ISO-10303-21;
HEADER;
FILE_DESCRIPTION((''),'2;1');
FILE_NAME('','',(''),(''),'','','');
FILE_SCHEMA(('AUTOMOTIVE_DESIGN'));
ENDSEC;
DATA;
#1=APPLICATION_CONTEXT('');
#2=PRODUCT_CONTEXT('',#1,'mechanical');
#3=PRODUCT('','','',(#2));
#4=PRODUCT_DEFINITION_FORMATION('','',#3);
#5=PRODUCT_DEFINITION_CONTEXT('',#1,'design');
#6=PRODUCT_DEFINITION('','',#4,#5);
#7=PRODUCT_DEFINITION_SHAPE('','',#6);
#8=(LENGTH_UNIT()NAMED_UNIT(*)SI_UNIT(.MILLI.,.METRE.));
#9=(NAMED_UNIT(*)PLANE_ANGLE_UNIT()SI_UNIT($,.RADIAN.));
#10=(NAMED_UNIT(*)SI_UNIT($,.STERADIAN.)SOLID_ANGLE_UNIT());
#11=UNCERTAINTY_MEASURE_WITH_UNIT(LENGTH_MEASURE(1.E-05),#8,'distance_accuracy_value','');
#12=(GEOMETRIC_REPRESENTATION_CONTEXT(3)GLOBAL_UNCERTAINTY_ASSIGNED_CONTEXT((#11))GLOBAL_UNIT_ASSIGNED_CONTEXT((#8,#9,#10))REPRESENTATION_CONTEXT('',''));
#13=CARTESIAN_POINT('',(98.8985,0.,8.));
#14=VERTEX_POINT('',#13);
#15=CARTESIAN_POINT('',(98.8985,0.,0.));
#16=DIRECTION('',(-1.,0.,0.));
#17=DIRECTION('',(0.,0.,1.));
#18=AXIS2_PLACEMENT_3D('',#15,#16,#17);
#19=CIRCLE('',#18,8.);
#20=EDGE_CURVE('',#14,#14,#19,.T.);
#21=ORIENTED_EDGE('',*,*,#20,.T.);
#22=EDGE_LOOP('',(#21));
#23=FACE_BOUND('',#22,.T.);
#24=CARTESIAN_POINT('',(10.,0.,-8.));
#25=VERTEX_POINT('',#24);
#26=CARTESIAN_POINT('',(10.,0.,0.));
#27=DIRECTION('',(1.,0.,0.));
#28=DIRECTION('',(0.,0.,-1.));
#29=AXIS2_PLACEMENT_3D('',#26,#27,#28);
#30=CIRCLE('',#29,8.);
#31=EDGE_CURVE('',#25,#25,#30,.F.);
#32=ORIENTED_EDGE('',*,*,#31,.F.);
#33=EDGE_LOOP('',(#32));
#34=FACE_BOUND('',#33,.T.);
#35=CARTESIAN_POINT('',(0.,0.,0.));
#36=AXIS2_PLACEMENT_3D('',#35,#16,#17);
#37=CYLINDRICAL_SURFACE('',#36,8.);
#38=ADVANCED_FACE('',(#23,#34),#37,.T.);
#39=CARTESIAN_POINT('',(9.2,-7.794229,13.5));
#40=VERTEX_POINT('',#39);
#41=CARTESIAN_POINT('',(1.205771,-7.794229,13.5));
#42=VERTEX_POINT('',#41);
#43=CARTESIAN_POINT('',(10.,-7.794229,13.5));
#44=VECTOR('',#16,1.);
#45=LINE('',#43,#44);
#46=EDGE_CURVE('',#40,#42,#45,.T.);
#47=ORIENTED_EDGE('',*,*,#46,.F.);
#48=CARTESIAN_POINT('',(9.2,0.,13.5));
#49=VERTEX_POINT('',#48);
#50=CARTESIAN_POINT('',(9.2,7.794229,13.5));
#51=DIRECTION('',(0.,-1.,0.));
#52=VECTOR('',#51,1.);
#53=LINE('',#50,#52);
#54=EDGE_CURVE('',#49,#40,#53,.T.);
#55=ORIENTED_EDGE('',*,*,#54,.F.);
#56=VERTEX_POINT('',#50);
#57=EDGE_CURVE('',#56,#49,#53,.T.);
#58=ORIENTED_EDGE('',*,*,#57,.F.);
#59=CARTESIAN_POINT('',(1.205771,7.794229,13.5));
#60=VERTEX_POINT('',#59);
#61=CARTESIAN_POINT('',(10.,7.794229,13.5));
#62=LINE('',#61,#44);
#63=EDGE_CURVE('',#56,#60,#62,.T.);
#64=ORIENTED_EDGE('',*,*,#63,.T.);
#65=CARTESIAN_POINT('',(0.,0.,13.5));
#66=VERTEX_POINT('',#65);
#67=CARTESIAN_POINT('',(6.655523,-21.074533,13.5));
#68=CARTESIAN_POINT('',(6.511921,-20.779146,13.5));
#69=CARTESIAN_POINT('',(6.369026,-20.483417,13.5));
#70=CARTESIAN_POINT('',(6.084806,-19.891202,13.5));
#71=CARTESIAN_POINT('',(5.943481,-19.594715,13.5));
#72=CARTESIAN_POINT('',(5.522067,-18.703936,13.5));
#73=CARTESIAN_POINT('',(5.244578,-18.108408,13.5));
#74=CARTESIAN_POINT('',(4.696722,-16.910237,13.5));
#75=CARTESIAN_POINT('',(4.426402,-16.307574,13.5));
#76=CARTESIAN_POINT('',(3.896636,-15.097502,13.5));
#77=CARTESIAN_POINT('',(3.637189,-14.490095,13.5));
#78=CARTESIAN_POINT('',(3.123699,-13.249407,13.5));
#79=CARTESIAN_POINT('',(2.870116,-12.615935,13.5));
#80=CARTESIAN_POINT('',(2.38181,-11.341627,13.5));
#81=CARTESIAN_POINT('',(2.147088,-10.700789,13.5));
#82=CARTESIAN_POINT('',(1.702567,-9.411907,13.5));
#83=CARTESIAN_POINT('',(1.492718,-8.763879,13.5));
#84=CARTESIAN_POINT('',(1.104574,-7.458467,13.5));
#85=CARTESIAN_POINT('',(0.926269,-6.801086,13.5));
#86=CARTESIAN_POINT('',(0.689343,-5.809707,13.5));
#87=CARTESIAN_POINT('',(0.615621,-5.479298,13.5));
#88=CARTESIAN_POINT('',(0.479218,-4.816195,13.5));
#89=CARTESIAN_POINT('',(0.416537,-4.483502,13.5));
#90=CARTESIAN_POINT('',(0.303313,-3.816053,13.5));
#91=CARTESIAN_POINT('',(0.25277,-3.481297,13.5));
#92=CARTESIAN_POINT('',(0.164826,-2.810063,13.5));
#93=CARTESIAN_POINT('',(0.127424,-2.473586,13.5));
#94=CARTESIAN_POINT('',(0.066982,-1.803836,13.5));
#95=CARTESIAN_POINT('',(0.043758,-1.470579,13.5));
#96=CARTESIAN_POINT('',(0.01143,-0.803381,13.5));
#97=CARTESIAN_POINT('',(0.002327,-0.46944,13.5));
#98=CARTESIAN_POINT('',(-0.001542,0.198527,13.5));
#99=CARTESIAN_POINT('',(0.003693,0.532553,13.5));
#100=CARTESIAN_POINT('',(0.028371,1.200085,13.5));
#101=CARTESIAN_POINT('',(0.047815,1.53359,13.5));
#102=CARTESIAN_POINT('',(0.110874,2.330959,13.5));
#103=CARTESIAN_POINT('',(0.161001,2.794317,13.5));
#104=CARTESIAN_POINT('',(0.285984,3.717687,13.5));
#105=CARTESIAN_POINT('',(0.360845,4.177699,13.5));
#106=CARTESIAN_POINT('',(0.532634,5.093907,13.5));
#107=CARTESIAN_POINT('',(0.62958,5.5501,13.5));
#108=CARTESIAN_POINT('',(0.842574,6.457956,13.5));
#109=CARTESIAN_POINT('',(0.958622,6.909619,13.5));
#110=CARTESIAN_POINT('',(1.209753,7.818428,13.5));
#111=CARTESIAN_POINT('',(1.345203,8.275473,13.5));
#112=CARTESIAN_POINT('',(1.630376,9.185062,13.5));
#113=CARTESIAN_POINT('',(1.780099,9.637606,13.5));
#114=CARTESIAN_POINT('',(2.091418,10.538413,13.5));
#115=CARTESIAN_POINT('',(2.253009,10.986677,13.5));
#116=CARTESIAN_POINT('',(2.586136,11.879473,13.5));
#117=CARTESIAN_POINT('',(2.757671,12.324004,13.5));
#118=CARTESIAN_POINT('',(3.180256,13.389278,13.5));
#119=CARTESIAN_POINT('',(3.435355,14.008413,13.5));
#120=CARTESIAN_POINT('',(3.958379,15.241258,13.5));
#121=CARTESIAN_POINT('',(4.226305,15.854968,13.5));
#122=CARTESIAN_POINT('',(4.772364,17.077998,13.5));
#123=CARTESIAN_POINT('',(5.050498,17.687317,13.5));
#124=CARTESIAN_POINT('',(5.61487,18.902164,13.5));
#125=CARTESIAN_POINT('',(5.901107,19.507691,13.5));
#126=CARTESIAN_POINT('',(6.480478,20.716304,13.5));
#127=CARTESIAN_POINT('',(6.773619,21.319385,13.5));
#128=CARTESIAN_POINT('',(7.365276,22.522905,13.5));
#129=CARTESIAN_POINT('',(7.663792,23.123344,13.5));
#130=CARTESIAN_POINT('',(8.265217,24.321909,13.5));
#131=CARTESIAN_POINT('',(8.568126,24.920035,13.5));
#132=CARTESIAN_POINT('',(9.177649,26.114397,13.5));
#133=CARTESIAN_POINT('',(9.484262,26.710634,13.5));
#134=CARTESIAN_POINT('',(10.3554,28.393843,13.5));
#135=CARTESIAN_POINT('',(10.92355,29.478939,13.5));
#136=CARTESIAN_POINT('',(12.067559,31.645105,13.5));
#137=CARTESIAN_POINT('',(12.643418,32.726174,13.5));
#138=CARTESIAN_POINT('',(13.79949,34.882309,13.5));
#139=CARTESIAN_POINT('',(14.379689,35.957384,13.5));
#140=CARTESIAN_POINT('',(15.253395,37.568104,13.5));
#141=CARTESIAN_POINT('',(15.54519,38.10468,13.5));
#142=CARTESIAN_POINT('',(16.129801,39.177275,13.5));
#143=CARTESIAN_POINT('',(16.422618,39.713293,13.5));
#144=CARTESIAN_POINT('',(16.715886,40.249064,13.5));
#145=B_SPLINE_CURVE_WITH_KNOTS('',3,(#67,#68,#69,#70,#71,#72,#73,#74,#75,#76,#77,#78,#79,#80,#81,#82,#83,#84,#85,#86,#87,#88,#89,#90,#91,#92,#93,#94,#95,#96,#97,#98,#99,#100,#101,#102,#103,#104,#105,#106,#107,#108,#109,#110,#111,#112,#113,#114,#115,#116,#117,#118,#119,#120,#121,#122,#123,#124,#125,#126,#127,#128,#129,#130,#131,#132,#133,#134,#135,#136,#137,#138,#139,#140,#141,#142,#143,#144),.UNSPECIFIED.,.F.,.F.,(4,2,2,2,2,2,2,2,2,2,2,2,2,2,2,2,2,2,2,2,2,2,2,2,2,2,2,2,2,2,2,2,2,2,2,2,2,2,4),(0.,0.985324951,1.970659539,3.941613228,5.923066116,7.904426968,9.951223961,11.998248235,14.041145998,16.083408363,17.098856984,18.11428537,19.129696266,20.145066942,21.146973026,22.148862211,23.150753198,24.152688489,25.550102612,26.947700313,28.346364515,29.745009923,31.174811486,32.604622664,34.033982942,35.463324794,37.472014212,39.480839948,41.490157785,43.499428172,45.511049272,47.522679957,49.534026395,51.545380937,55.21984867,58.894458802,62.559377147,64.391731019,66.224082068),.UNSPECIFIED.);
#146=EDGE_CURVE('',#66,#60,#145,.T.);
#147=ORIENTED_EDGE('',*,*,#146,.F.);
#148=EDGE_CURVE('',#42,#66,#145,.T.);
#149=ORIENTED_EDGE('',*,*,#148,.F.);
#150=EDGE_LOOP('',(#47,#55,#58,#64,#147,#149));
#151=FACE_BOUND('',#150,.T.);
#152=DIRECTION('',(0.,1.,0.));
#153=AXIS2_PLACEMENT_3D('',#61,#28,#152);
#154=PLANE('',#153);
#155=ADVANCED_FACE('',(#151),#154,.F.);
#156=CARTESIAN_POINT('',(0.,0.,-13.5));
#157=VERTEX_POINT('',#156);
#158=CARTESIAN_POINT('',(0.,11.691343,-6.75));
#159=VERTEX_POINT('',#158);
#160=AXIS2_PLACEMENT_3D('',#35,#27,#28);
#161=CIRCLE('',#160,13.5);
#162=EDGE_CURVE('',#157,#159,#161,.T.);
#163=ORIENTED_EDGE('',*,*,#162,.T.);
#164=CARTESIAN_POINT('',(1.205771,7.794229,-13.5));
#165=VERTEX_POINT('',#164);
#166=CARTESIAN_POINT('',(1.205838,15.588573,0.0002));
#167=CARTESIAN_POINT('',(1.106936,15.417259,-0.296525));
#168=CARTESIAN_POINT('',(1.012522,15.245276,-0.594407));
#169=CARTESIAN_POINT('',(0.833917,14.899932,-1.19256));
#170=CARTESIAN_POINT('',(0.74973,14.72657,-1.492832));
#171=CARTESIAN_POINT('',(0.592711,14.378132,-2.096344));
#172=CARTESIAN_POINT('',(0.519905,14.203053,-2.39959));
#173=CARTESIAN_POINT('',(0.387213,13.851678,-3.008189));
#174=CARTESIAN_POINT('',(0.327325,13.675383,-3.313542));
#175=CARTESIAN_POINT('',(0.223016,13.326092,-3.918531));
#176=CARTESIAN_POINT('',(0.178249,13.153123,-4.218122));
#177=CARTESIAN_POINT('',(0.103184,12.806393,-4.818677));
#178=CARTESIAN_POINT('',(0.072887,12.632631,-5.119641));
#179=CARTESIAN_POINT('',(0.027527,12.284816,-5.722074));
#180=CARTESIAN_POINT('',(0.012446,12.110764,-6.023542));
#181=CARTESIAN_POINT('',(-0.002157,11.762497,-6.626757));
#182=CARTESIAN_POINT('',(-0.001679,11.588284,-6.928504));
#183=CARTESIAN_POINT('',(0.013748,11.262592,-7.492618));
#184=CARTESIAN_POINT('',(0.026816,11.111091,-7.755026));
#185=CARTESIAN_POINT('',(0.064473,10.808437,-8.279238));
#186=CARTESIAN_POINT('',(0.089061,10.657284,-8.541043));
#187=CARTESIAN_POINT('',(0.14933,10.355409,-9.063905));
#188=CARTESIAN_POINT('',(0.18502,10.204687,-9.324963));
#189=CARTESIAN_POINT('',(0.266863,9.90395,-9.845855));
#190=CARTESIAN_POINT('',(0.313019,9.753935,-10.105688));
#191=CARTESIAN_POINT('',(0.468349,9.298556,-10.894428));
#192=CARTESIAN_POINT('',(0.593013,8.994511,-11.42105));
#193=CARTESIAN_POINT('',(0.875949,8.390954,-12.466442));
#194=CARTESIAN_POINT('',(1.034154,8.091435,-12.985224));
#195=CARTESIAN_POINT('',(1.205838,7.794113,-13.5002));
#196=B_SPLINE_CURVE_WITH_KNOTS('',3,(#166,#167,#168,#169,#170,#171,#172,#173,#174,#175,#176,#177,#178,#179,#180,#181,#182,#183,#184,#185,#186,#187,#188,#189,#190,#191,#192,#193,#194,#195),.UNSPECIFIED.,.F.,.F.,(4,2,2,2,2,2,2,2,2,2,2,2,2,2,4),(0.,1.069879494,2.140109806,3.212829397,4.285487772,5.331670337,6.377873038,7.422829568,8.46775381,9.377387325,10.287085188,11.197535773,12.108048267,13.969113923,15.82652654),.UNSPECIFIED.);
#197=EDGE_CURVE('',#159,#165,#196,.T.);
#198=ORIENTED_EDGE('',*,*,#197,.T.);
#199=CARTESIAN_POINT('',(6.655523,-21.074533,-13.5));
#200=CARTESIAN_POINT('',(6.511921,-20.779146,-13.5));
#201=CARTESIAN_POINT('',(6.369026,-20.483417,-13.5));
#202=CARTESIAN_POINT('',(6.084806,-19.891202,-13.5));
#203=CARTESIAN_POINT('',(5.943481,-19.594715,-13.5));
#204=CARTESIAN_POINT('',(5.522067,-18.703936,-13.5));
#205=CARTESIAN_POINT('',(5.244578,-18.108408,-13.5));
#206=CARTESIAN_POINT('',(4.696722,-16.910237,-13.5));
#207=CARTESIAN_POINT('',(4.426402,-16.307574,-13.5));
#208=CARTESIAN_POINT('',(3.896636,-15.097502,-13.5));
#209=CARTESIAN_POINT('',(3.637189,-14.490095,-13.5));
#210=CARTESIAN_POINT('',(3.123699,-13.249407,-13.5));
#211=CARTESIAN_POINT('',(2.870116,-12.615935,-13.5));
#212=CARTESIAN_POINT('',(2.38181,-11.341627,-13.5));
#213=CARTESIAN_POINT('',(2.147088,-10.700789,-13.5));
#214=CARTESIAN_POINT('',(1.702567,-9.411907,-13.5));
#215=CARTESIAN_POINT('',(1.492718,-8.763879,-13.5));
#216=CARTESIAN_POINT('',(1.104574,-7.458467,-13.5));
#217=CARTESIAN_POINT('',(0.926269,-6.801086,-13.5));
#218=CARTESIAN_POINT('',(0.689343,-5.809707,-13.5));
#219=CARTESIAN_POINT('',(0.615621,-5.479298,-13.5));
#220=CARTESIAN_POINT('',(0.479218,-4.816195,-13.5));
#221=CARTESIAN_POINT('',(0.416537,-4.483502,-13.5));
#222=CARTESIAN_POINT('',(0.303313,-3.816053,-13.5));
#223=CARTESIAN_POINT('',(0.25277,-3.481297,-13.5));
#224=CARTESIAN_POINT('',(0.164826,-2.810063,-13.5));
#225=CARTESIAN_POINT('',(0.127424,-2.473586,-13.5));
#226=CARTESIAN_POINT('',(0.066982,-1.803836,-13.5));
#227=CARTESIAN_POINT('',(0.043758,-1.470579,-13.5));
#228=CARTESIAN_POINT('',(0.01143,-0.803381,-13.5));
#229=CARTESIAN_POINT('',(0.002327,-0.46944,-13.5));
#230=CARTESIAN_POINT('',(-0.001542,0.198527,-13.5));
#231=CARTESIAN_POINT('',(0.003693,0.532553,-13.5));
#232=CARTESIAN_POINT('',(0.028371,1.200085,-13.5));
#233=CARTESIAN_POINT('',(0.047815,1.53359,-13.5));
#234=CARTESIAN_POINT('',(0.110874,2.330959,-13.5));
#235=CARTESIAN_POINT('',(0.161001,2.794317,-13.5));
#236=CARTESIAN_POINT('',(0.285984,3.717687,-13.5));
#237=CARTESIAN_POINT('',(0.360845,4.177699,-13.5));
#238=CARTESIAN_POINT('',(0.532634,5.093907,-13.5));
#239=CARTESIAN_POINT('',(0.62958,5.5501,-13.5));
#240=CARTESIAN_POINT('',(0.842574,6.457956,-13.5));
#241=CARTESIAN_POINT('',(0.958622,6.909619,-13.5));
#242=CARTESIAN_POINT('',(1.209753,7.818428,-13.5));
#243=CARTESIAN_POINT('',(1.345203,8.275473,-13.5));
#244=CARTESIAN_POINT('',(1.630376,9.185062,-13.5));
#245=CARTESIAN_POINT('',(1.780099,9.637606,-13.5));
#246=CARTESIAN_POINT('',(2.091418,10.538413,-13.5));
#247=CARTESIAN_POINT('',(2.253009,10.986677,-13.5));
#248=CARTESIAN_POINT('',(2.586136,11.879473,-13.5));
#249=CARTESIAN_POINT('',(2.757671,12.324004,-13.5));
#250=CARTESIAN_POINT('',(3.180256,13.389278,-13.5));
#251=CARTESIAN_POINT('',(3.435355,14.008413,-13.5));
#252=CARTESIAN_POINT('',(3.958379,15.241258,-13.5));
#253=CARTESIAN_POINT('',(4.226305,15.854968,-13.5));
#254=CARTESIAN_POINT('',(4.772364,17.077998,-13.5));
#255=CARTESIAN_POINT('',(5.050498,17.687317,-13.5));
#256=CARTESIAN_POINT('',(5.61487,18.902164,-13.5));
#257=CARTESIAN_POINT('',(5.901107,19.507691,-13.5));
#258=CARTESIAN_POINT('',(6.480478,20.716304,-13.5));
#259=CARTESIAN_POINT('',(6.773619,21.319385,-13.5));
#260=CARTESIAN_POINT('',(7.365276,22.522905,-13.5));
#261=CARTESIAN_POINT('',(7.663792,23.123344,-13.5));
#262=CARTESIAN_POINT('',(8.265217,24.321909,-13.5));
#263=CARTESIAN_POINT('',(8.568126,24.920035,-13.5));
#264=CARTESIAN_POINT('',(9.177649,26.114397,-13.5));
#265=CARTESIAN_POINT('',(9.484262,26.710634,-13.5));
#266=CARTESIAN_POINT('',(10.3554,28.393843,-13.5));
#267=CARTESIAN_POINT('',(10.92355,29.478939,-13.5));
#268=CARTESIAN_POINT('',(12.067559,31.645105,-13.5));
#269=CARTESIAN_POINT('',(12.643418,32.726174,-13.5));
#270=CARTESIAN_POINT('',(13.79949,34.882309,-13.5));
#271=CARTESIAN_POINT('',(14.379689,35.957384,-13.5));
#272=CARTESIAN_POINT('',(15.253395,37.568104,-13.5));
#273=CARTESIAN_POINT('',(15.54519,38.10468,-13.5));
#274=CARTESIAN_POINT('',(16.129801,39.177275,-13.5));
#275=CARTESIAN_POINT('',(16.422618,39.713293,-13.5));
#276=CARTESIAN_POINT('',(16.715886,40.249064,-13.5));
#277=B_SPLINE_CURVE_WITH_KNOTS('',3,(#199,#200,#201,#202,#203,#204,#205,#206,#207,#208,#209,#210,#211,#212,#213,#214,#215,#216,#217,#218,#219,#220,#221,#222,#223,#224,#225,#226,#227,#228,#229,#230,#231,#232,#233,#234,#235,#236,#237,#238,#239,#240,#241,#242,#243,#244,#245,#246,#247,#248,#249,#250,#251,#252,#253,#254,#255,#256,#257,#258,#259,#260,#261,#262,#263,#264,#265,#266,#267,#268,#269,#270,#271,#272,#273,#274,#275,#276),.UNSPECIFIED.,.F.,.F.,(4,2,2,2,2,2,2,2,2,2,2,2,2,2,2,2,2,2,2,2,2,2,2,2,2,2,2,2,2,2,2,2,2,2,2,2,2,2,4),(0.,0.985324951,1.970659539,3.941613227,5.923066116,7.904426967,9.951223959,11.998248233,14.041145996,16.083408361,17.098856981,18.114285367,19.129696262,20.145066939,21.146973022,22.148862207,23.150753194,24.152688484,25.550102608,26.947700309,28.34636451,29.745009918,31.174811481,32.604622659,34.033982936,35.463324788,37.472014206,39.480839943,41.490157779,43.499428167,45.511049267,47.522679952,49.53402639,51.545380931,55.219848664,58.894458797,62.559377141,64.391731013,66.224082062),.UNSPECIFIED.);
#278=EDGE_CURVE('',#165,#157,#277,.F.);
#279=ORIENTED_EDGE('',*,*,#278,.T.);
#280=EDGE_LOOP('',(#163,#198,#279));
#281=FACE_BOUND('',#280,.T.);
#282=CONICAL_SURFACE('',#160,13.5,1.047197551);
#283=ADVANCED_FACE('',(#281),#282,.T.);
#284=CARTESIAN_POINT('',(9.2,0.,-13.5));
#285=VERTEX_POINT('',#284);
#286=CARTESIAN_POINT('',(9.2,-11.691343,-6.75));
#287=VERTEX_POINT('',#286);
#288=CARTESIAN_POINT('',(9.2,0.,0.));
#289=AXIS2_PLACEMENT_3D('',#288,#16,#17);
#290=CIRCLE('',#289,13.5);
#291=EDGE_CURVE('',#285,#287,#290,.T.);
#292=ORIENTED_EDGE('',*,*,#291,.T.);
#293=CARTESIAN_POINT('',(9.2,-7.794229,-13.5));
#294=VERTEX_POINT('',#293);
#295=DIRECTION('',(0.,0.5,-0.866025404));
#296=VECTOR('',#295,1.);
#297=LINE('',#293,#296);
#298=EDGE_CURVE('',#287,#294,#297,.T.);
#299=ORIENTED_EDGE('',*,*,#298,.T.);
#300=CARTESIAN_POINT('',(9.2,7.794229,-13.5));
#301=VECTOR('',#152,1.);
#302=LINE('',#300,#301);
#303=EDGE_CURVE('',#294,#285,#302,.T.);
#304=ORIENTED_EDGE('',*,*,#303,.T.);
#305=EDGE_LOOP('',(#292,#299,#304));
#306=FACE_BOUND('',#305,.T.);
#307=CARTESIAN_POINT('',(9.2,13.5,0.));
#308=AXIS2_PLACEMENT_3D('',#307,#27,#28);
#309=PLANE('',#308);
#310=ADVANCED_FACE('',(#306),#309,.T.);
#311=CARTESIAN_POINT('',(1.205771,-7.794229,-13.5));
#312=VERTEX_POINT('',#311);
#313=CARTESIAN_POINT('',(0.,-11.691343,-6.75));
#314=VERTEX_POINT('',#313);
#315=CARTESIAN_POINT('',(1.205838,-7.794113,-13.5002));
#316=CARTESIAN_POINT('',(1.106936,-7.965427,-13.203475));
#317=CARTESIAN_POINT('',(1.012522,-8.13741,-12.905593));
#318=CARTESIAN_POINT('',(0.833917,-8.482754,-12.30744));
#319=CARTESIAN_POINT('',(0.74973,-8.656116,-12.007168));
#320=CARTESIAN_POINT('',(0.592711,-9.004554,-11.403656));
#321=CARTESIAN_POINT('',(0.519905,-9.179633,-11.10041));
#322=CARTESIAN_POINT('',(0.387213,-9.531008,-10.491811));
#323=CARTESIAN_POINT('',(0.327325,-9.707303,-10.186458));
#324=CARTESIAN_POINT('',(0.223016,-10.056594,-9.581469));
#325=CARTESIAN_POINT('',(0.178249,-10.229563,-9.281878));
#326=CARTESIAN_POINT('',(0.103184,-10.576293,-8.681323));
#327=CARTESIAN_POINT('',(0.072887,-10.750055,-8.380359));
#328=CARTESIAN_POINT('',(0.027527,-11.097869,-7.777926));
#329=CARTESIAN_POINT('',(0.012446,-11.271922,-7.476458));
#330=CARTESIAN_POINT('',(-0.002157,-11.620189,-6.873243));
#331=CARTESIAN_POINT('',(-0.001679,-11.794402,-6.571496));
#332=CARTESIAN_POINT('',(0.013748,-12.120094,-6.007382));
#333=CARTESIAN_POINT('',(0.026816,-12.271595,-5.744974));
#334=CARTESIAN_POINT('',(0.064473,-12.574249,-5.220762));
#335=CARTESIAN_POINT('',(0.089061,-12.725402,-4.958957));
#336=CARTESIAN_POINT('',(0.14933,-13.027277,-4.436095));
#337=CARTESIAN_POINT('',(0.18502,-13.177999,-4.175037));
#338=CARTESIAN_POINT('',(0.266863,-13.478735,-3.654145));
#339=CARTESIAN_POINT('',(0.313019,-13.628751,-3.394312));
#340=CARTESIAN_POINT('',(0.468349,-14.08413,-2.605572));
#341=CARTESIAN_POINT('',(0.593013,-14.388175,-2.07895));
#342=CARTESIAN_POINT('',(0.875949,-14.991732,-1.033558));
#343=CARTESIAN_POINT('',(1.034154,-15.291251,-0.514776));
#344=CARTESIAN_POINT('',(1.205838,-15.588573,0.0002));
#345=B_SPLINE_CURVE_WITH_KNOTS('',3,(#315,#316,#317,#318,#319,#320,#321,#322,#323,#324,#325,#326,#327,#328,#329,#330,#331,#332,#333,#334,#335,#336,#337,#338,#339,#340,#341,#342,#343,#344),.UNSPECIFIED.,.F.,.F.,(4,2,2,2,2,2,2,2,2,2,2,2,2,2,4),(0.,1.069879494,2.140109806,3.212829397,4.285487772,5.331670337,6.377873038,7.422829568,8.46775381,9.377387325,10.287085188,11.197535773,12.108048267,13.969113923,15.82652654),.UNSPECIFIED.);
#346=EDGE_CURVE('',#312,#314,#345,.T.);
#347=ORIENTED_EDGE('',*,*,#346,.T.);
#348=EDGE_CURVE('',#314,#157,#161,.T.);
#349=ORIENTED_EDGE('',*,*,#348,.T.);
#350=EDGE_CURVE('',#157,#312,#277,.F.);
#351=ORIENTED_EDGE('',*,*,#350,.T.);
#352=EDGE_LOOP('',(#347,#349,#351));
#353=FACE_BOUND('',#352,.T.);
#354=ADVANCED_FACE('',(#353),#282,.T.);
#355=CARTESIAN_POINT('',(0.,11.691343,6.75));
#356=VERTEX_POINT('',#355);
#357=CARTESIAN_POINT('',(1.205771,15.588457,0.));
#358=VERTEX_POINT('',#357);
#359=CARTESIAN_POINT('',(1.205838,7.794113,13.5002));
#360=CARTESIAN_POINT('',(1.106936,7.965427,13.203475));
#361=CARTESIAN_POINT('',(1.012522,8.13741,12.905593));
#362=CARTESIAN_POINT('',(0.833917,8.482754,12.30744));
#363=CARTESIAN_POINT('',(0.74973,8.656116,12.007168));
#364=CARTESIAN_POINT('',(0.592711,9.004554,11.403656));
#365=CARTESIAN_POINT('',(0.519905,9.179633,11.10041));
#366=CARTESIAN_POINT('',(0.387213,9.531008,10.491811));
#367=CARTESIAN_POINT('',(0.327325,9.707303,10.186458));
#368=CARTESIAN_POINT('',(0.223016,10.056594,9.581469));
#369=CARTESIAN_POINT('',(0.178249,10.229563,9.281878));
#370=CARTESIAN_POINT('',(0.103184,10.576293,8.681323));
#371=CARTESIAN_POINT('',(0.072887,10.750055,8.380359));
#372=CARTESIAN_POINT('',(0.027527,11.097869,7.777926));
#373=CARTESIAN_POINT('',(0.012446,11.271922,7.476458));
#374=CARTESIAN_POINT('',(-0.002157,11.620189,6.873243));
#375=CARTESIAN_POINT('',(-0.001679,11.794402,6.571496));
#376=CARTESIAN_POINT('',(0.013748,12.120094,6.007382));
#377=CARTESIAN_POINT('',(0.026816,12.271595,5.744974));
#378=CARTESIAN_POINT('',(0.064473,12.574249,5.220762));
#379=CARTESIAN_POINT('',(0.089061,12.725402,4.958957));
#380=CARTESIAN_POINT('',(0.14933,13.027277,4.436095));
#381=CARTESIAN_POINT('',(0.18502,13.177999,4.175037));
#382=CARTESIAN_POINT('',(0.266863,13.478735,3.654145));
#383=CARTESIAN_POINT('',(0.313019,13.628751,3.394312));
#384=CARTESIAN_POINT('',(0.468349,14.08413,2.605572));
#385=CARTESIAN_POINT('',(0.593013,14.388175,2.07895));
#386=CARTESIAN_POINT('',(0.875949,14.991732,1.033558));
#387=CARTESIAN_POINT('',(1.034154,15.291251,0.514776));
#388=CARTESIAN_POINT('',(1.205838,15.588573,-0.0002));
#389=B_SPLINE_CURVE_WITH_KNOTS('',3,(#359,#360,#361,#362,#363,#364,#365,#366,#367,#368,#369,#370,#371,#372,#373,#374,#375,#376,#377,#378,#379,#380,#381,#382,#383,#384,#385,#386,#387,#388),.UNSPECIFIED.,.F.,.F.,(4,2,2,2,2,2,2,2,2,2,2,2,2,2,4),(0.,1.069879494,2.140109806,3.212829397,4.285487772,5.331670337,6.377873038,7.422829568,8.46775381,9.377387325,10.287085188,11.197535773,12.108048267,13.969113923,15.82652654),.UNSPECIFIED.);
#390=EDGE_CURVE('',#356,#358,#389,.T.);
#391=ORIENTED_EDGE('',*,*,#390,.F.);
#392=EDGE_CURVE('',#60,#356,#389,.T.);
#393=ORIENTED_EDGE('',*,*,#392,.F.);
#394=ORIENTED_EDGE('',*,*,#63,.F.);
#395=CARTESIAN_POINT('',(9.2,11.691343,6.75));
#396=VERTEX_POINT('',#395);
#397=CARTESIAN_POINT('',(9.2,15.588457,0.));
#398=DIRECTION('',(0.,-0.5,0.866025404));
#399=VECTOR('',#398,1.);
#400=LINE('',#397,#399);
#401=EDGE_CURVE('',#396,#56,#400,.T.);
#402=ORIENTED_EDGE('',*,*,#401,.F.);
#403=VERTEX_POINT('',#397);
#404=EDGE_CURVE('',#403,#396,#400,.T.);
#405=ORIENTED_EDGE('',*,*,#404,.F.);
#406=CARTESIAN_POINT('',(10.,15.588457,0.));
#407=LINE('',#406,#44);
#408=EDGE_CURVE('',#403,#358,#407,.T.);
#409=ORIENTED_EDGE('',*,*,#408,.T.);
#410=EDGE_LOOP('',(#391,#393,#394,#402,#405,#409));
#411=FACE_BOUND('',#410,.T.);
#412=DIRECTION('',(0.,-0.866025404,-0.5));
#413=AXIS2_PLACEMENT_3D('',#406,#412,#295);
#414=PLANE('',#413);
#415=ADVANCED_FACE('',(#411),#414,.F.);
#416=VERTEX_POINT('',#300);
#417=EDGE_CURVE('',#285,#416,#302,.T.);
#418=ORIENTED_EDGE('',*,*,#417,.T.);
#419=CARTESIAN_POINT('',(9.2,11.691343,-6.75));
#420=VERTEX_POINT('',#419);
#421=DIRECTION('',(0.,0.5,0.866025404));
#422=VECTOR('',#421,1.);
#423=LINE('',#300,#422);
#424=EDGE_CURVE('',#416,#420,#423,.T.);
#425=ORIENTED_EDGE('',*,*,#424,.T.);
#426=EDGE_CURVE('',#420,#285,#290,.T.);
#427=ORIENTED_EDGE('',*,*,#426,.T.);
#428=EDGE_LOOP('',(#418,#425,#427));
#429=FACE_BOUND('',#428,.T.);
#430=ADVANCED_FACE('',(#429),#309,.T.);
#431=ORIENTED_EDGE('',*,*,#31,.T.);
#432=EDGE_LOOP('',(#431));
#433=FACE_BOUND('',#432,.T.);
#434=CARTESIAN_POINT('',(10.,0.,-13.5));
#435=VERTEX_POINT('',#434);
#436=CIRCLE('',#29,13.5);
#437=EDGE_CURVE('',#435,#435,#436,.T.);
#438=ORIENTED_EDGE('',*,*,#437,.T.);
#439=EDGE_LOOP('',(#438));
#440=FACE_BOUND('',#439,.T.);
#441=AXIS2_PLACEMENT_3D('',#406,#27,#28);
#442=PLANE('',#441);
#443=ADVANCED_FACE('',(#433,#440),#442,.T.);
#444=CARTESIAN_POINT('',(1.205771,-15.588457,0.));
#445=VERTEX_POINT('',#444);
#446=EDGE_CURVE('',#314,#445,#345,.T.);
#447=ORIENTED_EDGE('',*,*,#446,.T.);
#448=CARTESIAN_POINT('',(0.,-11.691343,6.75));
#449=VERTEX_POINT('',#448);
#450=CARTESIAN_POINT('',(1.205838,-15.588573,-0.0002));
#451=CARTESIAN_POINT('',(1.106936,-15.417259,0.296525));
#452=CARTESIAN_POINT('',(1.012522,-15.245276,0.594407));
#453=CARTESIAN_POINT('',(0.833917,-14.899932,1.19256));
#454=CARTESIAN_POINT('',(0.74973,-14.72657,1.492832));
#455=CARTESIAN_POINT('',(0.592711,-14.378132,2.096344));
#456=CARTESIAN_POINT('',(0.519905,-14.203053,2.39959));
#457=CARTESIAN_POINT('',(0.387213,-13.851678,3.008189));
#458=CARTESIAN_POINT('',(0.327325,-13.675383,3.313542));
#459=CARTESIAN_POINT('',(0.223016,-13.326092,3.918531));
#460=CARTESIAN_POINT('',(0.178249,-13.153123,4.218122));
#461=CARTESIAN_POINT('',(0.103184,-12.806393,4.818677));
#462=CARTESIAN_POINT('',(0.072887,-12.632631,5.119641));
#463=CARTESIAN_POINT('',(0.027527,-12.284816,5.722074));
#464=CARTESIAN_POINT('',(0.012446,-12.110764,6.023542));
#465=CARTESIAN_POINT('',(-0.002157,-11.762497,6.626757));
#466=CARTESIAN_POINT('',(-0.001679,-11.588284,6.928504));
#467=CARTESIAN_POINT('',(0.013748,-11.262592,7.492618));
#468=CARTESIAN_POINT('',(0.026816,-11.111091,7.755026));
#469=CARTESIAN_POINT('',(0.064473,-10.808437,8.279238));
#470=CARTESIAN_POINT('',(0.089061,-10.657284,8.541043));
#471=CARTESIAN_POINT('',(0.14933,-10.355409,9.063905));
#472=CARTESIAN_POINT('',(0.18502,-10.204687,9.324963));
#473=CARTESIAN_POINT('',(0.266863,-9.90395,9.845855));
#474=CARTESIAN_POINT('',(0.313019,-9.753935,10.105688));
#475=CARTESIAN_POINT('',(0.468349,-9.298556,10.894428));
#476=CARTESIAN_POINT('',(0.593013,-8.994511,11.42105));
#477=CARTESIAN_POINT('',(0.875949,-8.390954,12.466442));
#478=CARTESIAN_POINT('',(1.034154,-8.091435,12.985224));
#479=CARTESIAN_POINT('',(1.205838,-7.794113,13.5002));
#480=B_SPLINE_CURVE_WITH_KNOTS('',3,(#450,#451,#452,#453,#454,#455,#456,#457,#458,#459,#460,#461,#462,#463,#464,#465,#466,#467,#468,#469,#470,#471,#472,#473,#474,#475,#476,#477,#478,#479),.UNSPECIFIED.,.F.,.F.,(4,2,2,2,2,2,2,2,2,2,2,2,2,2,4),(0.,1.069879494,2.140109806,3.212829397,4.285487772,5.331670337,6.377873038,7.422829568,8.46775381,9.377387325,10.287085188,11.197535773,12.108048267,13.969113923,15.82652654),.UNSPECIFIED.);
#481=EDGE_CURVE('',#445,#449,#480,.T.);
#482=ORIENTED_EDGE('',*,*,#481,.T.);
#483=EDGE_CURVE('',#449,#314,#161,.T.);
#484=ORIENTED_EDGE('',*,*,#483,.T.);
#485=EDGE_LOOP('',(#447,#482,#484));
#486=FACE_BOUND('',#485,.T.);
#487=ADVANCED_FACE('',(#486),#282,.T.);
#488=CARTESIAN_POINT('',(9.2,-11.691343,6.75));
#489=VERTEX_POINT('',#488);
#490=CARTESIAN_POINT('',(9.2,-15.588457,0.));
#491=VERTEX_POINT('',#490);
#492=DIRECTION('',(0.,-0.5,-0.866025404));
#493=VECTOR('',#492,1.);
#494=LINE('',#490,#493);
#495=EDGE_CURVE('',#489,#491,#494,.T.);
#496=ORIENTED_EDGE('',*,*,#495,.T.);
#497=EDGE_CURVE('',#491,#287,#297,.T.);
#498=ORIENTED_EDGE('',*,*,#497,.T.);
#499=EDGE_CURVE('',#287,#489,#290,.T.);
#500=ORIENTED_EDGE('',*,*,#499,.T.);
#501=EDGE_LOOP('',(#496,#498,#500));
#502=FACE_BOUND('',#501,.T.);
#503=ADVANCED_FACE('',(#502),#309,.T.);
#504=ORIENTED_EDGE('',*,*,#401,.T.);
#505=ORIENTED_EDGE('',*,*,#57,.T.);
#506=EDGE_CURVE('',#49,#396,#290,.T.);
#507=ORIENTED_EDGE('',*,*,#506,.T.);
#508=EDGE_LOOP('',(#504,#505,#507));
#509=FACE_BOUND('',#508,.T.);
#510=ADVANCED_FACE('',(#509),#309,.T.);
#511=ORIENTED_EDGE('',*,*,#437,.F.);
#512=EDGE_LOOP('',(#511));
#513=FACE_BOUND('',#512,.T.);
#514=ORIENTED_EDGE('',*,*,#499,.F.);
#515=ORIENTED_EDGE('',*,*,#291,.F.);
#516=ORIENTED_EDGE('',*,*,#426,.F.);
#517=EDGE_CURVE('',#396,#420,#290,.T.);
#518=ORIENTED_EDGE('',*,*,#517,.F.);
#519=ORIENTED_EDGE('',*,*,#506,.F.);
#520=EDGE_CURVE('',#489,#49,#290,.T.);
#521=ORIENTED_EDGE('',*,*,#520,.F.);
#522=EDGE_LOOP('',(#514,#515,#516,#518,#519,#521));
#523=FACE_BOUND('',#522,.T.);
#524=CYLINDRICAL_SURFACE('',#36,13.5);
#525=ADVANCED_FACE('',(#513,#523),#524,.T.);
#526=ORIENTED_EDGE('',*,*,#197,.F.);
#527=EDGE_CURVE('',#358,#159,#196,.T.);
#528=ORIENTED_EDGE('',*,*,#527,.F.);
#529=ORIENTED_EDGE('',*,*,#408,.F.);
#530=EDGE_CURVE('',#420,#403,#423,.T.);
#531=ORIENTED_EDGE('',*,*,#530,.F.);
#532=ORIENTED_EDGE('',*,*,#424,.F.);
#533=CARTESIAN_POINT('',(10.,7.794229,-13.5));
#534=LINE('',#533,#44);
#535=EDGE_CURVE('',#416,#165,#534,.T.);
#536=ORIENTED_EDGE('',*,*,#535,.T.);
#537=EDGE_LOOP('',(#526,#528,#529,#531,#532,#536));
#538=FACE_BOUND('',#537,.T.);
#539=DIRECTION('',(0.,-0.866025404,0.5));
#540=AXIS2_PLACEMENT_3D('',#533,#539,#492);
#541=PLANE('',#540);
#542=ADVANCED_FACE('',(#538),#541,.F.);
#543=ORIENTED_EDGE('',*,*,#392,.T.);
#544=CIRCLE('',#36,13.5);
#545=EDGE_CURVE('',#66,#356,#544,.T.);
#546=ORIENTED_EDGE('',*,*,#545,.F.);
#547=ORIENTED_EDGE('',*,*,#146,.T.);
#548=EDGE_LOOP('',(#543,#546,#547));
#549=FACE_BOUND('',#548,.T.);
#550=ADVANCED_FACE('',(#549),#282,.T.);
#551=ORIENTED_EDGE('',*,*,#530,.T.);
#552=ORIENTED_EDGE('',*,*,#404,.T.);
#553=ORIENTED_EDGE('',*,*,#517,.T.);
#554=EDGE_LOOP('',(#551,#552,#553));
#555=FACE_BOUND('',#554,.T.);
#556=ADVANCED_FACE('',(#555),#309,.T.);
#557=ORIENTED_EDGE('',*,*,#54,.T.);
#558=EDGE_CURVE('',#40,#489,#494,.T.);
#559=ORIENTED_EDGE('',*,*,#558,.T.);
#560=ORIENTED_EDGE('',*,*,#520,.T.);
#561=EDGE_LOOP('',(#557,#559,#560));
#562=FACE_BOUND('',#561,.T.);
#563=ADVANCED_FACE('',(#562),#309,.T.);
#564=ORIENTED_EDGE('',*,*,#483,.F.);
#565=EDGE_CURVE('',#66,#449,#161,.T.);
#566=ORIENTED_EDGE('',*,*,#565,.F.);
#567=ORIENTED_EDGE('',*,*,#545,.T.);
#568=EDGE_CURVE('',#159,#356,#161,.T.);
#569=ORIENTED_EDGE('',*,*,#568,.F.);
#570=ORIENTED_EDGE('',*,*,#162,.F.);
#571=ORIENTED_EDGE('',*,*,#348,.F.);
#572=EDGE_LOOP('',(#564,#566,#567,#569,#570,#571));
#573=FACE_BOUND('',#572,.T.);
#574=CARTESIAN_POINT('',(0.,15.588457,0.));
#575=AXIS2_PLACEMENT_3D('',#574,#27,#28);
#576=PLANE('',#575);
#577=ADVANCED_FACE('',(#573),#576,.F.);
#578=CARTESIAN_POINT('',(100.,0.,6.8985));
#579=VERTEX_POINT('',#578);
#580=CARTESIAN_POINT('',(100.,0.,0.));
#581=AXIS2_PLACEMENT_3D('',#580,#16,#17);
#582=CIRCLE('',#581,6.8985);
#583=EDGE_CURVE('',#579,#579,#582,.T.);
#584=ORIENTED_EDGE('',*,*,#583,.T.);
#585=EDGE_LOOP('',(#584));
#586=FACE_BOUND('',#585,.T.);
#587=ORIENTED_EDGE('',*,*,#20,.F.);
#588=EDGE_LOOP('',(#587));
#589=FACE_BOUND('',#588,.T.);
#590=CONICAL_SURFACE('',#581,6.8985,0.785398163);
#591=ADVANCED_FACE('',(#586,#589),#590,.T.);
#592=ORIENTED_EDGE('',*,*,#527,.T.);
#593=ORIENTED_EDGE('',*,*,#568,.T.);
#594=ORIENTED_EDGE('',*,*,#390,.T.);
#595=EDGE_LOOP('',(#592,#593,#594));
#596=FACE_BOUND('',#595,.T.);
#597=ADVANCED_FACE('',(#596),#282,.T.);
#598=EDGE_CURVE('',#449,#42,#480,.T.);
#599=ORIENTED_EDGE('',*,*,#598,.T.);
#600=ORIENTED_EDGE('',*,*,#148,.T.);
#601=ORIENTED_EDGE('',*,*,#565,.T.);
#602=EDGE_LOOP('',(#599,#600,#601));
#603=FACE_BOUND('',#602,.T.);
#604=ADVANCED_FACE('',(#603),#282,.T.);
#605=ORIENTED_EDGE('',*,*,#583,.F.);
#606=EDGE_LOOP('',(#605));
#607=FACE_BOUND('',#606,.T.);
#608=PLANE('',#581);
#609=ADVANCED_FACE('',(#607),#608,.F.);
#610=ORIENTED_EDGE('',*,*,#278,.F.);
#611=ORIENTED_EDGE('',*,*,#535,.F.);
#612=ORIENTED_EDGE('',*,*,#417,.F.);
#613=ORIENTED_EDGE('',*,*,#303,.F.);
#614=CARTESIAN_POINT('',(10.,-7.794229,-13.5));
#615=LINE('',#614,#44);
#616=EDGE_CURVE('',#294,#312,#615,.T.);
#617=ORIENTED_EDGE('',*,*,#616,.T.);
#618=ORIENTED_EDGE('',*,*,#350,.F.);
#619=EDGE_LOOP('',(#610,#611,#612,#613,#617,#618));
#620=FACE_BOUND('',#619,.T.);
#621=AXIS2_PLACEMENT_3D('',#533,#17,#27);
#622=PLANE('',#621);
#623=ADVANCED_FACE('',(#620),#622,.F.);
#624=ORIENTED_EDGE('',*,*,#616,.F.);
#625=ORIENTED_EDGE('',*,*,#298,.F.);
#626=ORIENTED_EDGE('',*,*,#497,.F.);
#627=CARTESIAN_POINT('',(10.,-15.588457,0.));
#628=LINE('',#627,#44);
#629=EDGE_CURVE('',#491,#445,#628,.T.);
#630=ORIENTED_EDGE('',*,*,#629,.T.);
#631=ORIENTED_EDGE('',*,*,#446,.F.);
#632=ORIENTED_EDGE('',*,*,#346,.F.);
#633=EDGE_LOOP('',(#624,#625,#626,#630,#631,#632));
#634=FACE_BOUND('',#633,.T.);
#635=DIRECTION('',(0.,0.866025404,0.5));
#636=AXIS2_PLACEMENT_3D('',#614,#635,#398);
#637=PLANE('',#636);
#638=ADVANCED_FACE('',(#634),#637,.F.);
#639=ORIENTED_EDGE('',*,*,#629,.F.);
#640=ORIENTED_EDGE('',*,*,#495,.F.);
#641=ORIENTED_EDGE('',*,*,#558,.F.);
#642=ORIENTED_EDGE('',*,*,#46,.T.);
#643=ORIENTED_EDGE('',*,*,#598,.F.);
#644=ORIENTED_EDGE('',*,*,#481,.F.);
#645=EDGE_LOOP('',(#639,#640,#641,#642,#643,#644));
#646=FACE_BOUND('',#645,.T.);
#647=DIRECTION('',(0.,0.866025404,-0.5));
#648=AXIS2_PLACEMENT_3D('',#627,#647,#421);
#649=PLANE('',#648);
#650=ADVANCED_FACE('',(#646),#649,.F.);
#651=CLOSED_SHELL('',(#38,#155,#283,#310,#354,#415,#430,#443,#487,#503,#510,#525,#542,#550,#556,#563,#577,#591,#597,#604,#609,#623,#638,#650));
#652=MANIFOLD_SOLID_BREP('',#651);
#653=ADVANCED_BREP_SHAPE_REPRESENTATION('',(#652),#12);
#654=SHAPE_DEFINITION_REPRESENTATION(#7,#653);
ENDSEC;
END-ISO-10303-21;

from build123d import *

# Parameters (mm, degrees)
BASEHEAD_DEPTH = 10
SKETCH4_W      = 0.8
SKETCH4_H      = 12.088457268


# Read off the part's stored shape, not the designer's step: HeadChamfer
with BuildPart() as part:
    # Sketch1 → BaseHead (new body)
    with BuildSketch(Plane(origin=(0, 0, 0), x_dir=(0, 0, -1), z_dir=(1, 0, 0))):
        Polygon((13.5, 7.794228634), (13.5, -7.794228634), (0, -15.588457268), (-13.5, -7.794228634), (-13.5, 7.794228634), (0, 15.588457268), align=None)
    extrude(amount=BASEHEAD_DEPTH)

    # HeadChamfer outline → HeadChamfer (revolve, cut)
    with BuildSketch(Plane.YX):
        Polygon((15.58845727, 1.205771367), (13.499999851, -8.6e-08), (15.58845727, -8.6e-08), align=None)
    revolve(axis=Axis((0, 0, 0), (1, 0, 0)), mode=Mode.SUBTRACT)

    # HeadChamfer 2 outline → HeadChamfer 2 (revolve)
    with BuildSketch(Plane.YX):
        Polygon((8, 10), (8, 98.8985), (6.8985, 100), (0, 100), (0, 10), align=None)
    revolve(axis=Axis((0, 0, 0), (1, 0, 0)))

    # Sketch4 → BearingFace (revolve, cut)
    with BuildSketch(Plane.XY, mode=Mode.PRIVATE) as bearingface_sk:
        with Locations((9.6, 19.544228634)):
            Rectangle(SKETCH4_W, SKETCH4_H)
    revolve(bearingface_sk.sketch.rotate(Axis((0, 0, 0), (1, 0, 0)), 90), axis=Axis((0, 0, 0), (1, 0, 0)), mode=Mode.SUBTRACT)


solid = part.part
